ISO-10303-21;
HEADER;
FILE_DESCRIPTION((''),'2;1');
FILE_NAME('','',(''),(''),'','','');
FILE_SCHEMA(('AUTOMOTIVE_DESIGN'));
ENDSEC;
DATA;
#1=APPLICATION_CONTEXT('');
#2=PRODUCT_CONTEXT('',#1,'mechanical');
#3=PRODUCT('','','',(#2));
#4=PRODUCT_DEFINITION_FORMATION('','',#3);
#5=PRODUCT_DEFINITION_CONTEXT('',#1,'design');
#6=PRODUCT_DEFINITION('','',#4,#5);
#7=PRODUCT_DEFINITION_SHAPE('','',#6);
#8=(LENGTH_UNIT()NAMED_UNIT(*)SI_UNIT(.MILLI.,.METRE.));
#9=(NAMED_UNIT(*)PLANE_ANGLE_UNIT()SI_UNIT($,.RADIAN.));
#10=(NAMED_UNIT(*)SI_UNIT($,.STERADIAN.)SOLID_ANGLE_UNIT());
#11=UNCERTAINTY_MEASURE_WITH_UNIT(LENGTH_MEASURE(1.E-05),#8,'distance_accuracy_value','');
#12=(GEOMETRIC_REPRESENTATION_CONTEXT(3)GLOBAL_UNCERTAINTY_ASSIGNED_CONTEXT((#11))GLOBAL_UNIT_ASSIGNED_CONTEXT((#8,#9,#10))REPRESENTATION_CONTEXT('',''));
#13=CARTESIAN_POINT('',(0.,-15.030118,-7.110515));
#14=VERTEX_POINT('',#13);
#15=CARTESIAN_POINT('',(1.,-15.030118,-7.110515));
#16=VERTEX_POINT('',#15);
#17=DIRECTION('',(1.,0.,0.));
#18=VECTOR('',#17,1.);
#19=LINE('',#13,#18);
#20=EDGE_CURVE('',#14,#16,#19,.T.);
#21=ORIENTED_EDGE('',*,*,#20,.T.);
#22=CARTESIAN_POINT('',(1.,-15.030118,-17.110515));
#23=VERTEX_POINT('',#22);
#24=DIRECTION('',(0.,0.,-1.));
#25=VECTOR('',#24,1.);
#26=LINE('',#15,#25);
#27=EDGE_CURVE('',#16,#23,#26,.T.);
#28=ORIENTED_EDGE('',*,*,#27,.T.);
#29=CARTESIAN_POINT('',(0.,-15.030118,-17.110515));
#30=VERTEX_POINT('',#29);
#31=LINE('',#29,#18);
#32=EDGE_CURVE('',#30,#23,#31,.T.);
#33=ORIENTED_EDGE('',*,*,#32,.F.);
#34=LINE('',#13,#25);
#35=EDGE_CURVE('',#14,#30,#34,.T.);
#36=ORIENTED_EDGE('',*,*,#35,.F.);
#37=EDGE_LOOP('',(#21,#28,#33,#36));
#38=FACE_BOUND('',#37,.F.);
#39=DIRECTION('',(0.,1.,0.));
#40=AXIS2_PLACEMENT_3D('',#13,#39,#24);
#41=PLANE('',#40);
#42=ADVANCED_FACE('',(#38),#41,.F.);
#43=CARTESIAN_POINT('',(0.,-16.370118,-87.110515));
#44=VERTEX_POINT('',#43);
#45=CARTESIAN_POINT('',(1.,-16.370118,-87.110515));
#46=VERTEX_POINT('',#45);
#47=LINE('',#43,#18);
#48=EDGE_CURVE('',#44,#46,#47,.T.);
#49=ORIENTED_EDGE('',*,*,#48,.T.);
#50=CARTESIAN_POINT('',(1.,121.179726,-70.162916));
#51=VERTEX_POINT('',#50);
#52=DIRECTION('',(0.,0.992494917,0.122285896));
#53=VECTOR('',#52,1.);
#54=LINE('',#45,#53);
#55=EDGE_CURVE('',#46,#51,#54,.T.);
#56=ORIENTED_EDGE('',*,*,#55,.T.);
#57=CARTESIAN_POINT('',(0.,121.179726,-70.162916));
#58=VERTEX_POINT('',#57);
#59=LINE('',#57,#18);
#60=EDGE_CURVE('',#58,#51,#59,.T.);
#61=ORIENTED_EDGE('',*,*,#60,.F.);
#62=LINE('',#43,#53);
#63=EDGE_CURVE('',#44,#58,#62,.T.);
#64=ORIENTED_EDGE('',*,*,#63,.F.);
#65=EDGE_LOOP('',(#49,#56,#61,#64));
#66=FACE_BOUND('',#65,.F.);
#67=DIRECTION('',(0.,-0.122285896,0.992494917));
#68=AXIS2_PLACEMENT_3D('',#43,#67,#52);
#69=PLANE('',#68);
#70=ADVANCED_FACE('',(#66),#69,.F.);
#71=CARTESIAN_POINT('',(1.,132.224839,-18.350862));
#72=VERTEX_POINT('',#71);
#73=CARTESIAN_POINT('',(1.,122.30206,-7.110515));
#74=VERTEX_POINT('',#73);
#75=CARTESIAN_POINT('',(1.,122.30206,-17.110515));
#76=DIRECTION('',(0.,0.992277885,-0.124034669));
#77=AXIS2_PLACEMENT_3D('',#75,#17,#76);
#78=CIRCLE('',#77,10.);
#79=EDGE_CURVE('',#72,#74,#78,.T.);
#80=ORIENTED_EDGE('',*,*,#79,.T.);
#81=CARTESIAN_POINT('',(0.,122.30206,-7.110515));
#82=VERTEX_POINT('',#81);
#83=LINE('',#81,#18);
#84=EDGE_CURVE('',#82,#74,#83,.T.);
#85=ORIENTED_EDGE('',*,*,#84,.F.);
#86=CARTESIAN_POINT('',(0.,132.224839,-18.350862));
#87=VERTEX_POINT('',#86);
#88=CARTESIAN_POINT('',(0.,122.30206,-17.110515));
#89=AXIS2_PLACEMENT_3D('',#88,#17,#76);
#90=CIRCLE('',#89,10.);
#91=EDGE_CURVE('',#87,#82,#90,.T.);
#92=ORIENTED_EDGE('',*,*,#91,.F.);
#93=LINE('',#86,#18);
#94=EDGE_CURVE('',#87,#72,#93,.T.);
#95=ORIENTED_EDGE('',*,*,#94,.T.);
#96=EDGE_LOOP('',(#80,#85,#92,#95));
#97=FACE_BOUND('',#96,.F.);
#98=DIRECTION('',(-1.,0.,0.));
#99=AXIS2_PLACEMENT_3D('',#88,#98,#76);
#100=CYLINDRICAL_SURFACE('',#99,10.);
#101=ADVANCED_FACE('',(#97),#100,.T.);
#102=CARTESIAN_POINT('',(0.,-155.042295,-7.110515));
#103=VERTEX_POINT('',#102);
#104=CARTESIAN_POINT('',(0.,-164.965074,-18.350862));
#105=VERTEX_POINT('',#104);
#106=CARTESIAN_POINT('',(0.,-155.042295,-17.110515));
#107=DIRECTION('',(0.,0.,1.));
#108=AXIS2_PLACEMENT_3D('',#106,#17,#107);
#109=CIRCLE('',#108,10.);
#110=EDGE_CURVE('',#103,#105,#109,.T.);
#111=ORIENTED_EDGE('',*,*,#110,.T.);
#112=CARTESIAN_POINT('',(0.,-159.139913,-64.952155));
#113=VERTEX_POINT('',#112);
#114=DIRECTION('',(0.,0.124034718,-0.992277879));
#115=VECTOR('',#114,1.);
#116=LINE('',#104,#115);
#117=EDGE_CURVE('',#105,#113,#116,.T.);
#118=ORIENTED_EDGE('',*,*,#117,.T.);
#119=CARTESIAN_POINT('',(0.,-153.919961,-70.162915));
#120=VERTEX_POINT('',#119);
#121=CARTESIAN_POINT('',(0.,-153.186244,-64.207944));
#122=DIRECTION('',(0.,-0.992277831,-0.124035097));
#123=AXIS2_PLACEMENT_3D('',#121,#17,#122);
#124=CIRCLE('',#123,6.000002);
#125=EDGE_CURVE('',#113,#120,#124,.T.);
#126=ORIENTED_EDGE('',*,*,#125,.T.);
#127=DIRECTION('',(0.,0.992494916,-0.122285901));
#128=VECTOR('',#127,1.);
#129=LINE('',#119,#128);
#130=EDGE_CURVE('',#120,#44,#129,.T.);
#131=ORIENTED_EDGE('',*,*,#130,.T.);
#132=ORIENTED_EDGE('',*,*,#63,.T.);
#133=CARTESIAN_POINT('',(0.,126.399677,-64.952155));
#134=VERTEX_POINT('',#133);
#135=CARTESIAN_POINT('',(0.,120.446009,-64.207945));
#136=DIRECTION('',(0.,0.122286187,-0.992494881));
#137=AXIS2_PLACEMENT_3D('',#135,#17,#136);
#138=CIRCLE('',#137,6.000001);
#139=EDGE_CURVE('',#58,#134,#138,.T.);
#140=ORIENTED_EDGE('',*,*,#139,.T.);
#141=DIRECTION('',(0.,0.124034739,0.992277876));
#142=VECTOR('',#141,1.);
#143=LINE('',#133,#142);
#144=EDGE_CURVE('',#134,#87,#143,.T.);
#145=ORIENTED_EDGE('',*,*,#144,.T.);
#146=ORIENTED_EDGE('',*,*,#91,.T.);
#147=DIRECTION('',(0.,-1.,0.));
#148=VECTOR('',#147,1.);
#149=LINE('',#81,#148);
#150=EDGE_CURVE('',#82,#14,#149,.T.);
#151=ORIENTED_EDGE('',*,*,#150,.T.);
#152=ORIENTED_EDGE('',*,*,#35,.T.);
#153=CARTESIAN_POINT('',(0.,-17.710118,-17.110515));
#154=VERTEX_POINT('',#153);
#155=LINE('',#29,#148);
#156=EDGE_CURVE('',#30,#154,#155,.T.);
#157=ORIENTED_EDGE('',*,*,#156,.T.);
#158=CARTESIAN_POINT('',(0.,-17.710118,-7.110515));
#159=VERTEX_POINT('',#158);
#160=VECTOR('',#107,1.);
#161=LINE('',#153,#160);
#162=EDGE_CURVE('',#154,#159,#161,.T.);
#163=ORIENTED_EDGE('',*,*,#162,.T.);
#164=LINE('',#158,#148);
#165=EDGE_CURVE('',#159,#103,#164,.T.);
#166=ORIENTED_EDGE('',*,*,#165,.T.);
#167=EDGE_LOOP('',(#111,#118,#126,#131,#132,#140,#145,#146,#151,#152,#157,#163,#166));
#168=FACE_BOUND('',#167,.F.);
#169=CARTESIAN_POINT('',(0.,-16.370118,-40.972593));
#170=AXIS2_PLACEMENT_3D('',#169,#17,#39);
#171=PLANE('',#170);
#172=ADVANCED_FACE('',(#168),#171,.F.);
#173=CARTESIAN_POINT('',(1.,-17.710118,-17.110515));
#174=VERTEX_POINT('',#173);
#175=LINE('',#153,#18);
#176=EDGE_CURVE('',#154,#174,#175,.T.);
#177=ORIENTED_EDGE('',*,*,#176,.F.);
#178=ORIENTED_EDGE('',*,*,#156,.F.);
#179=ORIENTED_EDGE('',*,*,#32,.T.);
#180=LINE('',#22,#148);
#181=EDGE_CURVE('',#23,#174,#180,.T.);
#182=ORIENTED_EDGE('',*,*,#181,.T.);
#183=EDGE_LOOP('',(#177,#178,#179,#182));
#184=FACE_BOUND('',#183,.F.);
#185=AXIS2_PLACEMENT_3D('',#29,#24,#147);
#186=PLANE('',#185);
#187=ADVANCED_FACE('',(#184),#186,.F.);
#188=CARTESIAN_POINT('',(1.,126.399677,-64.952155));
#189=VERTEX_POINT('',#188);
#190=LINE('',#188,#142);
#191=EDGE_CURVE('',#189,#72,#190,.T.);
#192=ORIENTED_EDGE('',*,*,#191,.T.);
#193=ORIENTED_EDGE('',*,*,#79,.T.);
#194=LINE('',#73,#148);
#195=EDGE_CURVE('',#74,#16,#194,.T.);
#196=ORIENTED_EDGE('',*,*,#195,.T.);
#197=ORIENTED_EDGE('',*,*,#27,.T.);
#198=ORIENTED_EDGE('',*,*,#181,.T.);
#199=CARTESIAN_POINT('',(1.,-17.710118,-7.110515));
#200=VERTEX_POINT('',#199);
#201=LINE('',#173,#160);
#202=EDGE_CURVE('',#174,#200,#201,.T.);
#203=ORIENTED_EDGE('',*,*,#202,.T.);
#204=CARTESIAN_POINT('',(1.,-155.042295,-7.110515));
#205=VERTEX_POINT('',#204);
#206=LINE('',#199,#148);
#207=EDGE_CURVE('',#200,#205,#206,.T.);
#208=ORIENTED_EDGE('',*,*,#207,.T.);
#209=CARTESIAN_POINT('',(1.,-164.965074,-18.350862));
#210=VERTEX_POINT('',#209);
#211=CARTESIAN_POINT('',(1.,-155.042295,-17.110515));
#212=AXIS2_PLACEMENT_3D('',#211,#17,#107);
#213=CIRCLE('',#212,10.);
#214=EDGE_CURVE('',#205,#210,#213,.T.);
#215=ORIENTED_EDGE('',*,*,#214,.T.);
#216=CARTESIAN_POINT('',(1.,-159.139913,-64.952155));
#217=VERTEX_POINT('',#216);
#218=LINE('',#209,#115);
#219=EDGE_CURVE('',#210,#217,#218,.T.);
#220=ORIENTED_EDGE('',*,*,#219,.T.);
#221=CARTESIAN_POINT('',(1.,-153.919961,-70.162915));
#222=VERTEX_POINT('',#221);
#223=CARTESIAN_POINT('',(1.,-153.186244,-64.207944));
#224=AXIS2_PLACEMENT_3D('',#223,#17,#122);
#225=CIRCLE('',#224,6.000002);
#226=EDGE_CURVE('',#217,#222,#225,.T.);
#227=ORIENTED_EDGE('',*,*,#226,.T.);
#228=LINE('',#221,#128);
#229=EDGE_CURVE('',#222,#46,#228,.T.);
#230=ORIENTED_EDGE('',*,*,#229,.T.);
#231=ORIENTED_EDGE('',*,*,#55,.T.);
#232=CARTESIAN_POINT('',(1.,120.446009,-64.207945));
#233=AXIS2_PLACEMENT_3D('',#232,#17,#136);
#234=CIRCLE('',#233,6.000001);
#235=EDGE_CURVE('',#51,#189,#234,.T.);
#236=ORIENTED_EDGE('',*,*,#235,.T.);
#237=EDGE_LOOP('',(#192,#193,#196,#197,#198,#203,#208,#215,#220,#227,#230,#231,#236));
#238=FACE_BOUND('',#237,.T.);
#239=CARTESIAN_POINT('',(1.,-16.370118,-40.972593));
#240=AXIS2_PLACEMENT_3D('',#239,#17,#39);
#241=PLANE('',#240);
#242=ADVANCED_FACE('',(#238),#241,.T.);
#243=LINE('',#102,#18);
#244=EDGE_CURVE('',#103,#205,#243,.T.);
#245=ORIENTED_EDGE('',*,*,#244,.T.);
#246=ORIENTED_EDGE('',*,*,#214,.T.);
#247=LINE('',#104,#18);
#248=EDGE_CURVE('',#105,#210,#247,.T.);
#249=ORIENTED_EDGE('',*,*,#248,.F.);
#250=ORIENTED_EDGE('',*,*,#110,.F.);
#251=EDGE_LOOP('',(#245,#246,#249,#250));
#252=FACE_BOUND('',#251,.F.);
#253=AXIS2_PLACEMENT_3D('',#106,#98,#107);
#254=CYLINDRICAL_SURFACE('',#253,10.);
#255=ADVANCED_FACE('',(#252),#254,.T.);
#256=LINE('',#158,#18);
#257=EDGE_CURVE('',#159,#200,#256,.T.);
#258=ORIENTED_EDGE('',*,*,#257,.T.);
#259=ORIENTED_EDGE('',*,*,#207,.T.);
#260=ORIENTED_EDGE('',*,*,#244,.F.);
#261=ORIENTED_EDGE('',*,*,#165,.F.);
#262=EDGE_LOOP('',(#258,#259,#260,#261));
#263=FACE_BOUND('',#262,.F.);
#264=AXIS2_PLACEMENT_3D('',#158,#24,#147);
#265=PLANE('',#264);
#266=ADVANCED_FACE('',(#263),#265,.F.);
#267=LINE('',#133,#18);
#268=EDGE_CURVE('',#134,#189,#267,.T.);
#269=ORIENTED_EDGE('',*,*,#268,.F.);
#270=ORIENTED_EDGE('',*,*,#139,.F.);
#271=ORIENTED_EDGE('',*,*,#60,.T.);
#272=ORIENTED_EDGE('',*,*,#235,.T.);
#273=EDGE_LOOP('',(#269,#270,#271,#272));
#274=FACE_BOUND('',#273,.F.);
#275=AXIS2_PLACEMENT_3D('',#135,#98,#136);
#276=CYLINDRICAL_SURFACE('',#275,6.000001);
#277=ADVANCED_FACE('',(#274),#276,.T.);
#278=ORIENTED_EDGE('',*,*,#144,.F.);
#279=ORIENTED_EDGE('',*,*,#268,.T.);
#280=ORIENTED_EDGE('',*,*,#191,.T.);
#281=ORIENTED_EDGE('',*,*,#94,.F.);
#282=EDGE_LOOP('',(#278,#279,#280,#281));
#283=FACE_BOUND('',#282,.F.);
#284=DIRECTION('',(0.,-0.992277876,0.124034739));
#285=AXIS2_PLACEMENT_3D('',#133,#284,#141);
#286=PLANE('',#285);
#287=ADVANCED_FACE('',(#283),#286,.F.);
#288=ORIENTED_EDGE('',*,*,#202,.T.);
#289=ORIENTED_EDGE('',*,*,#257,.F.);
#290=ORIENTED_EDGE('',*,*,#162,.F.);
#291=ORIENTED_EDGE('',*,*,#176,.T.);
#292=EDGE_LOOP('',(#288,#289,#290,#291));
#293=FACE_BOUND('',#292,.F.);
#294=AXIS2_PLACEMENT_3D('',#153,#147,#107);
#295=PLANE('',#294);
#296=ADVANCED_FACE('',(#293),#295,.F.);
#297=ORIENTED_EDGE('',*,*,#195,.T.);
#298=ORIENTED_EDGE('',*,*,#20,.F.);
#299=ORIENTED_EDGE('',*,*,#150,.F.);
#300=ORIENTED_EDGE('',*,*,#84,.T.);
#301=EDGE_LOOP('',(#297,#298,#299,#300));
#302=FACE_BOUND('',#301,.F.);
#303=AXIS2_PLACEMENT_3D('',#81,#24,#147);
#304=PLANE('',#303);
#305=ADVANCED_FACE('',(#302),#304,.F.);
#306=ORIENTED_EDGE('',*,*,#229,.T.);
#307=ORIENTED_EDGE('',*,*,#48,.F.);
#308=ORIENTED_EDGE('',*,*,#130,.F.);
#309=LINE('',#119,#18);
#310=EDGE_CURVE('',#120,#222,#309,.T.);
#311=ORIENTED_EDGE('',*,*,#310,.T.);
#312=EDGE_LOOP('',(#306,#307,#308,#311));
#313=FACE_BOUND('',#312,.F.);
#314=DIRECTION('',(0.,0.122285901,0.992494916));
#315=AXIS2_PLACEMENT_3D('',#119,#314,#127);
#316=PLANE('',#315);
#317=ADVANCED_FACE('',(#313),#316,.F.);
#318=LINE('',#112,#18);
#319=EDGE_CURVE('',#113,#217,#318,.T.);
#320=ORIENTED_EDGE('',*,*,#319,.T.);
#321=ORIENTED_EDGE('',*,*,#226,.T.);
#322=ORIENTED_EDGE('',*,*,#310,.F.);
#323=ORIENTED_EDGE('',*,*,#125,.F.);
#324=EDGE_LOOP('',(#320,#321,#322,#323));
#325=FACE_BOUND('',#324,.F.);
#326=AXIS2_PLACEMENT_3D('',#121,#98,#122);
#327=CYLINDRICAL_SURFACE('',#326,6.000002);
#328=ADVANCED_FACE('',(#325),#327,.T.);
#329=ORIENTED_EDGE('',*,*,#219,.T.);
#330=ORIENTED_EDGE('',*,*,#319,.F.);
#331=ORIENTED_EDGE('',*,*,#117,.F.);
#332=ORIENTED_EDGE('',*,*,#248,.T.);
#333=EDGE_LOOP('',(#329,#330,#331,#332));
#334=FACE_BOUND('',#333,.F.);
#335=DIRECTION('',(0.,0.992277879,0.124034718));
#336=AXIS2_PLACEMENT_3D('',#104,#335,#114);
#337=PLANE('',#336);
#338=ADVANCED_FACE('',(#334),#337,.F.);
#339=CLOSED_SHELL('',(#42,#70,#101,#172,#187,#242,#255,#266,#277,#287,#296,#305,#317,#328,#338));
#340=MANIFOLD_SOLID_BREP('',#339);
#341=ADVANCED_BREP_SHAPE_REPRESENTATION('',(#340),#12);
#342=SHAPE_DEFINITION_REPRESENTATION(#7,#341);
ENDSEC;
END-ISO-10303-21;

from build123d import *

# Parameters (mm, degrees)
F1_DEPTH = 1


# Not quite as in the source:
# - ends of sketch curves that miss each other by under 0.0002 mm in the source are joined


with BuildPart() as f1:
    # F0 (on Right) → F1 (new body)
    with BuildSketch(Plane.YZ):
        with BuildLine():
            Line((-17.710118, -7.110515), (-155.042295, -7.110515))
            ThreePointArc((-155.042295, -7.110515), (-162.539076635, -10.4924892282), (-164.9650738133, -18.3508619767))
            Line((-164.9650738133, -18.3508619767), (-159.139913, -64.952155))
            ThreePointArc((-159.139913, -64.952155), (-157.4251457547, -68.4543233257), (-153.91996093, -70.1629154318))
            Line((-153.91996093, -70.1629154318), (-16.370118, -87.110515))
            Line((-16.370118, -87.110515), (121.179726, -70.162916))
            ThreePointArc((121.179726, -70.162916), (124.6849107108, -68.4543233695), (126.3996771834, -64.9521550229))
            Line((126.3996771834, -64.9521550229), (132.224839, -18.350862))
            ThreePointArc((132.224839, -18.350862), (129.798841635, -10.4924892282), (122.30206, -7.110515))
            Line((122.30206, -7.110515), (-15.030118, -7.110515))
            Line((-15.030118, -7.110515), (-15.030118, -17.110515))
            Line((-15.030118, -17.110515), (-17.710118, -17.110515))
            Line((-17.710118, -17.110515), (-17.710118, -7.110515))
        make_face()
    extrude(amount=F1_DEPTH)


solid = f1.part
